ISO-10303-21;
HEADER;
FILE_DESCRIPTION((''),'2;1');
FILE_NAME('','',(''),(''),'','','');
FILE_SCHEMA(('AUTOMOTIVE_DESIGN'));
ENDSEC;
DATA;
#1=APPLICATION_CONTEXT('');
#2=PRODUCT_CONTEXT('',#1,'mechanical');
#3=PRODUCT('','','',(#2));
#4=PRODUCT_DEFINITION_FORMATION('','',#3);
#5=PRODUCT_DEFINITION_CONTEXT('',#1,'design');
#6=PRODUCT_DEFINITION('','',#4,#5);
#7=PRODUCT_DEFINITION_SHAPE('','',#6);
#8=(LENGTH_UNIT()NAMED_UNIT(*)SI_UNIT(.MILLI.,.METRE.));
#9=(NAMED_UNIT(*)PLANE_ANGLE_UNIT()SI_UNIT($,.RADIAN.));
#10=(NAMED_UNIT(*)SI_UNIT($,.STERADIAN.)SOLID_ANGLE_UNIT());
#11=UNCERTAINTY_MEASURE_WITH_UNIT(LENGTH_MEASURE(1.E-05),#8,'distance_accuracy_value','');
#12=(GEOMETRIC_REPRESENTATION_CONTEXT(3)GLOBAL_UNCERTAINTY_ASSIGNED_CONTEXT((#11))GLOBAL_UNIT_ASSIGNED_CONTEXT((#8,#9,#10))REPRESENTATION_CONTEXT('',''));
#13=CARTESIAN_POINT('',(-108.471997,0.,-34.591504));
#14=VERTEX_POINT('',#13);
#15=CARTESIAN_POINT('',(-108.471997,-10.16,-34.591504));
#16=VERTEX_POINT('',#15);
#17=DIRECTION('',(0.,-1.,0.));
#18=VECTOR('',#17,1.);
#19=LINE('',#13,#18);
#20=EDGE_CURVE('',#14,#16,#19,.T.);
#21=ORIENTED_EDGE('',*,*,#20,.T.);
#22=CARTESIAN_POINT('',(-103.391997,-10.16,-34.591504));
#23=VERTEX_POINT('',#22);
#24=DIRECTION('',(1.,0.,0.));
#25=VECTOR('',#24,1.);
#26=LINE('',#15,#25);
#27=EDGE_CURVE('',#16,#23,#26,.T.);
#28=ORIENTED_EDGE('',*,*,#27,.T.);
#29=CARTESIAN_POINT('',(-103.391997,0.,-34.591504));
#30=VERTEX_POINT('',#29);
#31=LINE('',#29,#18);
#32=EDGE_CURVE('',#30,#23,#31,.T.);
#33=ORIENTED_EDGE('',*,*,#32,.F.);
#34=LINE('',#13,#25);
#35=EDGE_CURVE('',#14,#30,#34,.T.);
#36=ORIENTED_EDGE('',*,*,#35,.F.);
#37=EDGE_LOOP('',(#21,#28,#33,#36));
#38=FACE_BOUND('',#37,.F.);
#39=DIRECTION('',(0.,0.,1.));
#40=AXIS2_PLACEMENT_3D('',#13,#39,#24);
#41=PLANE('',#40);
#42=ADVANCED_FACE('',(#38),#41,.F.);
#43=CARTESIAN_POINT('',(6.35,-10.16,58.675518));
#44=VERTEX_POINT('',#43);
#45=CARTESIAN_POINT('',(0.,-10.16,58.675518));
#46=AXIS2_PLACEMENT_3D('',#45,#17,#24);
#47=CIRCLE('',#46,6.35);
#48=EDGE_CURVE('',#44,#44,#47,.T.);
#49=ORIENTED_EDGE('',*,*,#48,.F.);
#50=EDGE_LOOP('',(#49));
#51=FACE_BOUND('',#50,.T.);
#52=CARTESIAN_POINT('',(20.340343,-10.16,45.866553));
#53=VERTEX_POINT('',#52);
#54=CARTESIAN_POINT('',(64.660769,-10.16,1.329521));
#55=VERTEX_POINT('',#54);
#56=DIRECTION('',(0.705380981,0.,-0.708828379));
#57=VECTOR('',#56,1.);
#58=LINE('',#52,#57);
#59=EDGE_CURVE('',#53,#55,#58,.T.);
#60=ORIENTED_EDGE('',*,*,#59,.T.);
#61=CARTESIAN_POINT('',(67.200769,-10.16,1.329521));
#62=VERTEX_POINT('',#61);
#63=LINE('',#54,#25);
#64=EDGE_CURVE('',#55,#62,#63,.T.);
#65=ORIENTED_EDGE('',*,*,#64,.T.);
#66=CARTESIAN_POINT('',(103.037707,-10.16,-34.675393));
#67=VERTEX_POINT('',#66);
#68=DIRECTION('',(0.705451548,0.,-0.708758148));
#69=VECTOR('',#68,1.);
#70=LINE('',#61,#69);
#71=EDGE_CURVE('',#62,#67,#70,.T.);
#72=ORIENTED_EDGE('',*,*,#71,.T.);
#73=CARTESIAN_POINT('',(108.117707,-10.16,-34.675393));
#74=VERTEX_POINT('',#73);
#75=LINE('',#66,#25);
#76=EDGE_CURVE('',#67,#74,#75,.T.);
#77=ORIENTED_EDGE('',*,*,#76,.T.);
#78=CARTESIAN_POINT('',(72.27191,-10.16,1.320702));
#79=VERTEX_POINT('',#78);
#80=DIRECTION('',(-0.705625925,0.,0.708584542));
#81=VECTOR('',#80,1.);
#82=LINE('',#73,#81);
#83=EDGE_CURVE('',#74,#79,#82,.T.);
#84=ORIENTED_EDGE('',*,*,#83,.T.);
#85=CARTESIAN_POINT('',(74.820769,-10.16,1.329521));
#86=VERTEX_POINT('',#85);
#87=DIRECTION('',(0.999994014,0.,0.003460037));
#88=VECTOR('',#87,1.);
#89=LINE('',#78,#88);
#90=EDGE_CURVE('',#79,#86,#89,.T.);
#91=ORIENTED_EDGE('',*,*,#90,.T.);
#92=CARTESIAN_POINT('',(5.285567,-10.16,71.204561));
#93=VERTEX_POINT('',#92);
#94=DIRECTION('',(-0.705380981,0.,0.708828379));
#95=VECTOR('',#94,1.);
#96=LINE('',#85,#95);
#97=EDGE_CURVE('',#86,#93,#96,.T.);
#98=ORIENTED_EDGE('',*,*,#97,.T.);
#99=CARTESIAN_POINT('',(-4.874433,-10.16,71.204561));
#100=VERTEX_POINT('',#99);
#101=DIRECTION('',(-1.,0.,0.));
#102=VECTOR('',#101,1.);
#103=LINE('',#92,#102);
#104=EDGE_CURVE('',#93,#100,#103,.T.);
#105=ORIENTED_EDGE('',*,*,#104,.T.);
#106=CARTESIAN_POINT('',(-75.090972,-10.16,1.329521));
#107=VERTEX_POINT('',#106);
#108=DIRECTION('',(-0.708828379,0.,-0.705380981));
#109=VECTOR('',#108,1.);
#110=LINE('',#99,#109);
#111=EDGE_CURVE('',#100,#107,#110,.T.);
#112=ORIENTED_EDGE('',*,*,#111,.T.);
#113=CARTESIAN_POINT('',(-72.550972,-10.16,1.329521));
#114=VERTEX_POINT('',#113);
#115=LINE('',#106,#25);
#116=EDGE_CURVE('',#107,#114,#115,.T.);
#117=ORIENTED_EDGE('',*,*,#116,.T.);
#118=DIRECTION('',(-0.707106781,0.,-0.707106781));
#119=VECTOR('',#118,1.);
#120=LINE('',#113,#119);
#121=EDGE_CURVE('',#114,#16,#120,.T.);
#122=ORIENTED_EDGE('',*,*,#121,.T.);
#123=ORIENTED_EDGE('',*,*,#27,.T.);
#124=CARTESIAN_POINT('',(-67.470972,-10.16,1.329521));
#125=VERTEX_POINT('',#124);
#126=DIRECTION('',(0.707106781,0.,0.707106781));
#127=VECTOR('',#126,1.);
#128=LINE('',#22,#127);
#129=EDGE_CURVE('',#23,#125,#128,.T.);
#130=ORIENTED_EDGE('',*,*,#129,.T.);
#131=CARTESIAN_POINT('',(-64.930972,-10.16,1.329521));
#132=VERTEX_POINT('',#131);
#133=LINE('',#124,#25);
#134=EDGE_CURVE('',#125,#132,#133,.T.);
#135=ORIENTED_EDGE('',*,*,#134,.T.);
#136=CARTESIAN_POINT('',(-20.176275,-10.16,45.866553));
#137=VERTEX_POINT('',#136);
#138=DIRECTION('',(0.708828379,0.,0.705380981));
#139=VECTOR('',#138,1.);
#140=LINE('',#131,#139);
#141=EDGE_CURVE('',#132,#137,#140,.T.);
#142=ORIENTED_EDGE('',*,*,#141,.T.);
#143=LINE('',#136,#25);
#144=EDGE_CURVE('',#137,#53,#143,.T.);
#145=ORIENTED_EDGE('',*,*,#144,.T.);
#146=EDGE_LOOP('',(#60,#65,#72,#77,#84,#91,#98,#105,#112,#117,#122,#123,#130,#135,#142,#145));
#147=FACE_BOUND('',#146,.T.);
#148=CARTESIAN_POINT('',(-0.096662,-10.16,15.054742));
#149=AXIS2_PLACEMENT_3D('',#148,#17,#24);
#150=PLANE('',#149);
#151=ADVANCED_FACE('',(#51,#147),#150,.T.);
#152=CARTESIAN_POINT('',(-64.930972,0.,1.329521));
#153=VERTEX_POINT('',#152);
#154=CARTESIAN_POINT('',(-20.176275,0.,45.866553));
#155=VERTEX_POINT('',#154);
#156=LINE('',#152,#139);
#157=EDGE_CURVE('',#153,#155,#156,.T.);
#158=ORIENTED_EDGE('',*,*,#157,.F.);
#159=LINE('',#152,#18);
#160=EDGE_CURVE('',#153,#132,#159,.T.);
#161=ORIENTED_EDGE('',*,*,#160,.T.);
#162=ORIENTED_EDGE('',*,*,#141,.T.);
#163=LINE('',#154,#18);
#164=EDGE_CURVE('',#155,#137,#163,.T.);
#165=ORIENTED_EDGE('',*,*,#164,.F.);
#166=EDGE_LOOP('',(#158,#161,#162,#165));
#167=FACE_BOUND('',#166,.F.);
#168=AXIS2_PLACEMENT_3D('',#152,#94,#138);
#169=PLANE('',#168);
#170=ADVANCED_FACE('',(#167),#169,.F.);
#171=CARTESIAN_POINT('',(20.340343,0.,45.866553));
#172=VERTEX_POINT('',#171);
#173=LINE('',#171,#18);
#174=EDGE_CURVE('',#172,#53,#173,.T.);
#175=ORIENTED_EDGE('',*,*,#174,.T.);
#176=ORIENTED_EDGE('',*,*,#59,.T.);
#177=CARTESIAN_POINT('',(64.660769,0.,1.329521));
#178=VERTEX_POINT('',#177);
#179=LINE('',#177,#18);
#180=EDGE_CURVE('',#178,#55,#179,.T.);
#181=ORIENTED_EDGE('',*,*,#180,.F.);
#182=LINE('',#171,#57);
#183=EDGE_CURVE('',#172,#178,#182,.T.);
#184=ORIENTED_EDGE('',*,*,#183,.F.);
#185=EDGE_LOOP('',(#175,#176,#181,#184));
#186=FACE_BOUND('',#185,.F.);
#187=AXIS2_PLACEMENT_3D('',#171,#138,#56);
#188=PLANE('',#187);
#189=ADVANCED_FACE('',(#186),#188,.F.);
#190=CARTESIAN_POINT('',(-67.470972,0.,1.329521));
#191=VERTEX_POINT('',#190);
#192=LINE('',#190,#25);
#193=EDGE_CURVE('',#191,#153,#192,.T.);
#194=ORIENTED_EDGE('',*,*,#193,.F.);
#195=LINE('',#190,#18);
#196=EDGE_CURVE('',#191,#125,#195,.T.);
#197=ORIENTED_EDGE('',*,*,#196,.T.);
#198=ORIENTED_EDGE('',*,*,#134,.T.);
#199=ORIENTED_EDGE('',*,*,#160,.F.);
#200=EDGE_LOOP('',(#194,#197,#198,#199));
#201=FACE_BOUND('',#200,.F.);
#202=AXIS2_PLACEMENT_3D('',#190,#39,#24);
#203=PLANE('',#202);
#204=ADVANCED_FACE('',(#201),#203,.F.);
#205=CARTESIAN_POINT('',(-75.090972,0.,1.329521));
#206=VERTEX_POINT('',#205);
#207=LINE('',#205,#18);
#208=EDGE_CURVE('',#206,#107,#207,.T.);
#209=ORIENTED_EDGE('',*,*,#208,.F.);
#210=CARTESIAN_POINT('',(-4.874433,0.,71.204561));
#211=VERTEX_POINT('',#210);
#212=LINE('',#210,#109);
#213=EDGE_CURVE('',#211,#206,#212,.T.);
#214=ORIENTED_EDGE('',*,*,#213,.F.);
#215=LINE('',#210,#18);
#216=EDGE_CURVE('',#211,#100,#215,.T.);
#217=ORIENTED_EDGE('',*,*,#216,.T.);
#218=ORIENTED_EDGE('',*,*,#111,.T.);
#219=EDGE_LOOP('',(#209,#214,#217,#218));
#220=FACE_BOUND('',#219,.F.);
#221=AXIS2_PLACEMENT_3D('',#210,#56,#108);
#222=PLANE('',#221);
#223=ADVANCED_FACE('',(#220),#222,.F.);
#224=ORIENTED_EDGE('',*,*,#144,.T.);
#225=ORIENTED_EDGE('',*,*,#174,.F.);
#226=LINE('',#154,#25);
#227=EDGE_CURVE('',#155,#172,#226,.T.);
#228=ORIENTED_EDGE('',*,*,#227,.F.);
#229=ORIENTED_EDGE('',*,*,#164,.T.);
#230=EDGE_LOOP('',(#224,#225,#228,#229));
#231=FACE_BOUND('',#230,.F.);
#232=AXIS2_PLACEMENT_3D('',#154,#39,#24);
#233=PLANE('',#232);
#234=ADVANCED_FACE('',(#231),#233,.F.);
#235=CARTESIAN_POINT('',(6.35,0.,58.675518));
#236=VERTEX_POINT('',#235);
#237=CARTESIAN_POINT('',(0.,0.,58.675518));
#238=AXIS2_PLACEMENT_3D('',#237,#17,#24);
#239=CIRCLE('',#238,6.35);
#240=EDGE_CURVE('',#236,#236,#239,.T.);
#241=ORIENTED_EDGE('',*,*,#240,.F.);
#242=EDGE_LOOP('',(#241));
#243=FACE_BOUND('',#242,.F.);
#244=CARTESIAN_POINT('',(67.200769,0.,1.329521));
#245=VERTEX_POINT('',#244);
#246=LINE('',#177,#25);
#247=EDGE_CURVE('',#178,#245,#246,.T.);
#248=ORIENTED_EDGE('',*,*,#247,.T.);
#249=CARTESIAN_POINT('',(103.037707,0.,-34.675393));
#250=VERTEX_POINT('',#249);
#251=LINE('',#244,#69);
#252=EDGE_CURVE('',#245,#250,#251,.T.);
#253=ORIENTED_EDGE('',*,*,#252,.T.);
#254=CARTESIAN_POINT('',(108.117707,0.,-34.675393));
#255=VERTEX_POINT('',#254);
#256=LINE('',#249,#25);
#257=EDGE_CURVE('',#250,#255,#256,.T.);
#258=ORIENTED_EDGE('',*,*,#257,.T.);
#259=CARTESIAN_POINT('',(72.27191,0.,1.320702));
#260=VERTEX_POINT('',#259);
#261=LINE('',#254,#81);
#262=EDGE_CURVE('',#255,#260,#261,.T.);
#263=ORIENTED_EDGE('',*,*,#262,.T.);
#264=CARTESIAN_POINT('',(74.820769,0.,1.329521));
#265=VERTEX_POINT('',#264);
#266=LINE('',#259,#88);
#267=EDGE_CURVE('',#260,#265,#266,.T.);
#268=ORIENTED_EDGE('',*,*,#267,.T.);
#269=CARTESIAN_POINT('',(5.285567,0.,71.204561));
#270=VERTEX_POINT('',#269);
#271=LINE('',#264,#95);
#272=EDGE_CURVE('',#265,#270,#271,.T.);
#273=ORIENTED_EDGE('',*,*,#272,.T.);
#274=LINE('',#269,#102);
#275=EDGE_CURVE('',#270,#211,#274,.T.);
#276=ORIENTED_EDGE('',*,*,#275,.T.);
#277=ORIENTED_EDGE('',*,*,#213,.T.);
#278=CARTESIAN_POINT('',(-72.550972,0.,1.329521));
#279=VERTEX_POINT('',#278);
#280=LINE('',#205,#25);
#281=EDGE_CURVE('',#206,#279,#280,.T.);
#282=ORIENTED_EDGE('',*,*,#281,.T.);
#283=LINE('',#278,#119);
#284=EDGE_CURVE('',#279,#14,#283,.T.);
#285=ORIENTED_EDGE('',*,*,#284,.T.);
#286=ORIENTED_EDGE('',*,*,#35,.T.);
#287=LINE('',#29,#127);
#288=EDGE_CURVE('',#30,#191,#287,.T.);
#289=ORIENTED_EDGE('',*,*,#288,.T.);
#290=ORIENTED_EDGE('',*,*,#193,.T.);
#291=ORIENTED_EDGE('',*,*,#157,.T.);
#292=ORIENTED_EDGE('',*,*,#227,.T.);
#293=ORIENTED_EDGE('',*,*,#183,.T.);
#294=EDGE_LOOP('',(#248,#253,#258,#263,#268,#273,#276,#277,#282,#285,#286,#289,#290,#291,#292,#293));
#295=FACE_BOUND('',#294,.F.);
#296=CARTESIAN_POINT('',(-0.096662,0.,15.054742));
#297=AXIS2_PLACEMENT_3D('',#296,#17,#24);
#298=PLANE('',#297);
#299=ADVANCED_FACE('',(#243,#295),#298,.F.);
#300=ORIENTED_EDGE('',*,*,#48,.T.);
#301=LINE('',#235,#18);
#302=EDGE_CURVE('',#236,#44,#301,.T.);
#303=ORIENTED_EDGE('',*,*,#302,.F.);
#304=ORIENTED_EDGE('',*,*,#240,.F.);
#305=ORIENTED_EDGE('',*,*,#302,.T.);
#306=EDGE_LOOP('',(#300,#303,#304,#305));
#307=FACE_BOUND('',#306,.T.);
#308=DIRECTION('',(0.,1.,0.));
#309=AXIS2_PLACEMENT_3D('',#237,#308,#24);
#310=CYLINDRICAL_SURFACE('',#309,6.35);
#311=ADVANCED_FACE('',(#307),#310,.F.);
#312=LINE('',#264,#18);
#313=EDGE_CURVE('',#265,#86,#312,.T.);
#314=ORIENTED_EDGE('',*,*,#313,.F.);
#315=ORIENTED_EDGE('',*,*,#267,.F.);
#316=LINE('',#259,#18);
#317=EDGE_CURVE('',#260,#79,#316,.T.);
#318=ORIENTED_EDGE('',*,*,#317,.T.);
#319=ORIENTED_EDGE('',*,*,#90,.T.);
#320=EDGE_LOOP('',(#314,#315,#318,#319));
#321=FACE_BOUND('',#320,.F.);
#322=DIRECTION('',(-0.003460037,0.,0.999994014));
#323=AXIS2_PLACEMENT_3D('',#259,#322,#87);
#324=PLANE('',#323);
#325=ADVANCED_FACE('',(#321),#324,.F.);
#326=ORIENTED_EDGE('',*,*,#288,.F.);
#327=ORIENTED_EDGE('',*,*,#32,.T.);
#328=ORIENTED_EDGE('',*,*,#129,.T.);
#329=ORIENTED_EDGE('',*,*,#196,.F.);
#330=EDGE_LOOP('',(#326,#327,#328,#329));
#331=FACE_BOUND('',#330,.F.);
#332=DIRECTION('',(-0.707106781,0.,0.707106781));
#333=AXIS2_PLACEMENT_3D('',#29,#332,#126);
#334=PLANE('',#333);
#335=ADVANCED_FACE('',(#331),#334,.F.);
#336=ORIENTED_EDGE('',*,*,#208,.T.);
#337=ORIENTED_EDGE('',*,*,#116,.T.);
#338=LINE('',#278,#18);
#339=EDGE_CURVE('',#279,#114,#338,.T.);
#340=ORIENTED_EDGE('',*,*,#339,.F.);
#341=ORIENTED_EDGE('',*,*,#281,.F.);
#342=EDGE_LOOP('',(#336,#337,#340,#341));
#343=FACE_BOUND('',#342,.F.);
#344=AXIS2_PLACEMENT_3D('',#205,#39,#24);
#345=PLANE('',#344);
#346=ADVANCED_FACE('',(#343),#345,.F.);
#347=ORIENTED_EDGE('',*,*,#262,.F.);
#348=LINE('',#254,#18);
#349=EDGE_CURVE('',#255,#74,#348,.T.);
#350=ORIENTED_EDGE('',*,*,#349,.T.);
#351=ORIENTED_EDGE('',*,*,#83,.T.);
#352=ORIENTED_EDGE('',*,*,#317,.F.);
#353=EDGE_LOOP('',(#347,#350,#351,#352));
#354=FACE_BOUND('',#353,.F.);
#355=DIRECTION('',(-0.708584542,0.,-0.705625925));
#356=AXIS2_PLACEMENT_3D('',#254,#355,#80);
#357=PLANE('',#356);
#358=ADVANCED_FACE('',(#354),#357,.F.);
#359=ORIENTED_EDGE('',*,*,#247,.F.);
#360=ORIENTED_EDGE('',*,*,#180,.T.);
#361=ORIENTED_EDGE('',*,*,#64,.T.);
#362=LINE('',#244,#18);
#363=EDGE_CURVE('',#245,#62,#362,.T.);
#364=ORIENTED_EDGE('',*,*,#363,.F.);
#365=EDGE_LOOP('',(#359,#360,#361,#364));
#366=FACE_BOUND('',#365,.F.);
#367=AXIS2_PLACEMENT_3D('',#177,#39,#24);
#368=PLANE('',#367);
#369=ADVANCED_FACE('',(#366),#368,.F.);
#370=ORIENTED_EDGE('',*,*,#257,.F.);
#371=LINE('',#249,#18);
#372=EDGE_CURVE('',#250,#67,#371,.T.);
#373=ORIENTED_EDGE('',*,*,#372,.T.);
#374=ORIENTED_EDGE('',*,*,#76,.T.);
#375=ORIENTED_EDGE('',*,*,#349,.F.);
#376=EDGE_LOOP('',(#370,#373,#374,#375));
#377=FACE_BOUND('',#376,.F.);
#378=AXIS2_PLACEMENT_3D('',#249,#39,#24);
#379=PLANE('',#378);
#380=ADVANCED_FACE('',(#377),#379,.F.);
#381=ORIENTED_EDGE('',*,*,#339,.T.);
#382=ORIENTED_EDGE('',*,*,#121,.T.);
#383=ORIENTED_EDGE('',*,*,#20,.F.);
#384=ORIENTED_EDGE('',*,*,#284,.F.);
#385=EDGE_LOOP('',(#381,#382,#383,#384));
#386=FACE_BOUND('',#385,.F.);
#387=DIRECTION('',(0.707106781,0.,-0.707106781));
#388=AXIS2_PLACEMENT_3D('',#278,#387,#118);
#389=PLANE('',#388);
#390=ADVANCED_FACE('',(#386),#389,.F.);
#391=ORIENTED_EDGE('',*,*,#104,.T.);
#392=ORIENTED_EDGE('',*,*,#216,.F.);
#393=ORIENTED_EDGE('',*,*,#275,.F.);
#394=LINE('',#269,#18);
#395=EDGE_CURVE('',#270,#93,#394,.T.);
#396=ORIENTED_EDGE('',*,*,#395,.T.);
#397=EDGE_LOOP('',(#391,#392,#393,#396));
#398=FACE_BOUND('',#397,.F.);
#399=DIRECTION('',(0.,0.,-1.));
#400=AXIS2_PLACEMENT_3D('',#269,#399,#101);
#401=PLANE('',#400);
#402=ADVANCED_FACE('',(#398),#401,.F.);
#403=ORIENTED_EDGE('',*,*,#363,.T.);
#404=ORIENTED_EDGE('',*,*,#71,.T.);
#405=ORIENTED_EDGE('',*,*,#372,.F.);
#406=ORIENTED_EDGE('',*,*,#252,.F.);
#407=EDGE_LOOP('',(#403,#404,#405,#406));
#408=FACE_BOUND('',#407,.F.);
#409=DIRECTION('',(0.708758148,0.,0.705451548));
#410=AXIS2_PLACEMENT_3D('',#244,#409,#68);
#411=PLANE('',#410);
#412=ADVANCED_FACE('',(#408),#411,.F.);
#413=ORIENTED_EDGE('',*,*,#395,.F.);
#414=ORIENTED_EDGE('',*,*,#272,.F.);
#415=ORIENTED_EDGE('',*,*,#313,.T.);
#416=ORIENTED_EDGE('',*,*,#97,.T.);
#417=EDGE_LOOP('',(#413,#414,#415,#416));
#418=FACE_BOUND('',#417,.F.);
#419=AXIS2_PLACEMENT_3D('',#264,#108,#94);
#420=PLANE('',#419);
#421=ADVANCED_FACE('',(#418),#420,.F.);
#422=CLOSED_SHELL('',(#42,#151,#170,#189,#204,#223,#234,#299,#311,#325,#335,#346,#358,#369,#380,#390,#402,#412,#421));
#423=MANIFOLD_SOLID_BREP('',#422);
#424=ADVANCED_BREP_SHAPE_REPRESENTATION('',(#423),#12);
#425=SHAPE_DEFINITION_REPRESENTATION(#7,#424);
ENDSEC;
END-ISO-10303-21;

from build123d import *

# Parameters (mm, degrees)
F0_R     = 6.35
F1_DEPTH = 10.16


# Not quite as in the source:
# - a feature names something its author has since deleted; it is built from what else it names


with BuildPart() as f1:
    # F0 (on Front) → F1 (new body)
    with BuildSketch(Plane.XZ):
        Polygon((-4.8744329511, 71.2045607365), (-75.0909721843, 1.3295207142), (-72.5509721843, 1.3295207142), (-108.4719966685, -34.5915037701), (-103.3919966685, -34.5915037701), (-67.4709721843, 1.3295207142), (-64.9309721843, 1.3295207142), (-20.1762745117, 45.8665532311), (-4.9362745117, 45.8665532311), (5.2855670489, 45.8665532311), (20.3403427678, 45.8665532311), (64.660768747, 1.3295207142), (67.200768747, 1.3295207142), (103.0377074058, -34.6753932222), (108.1177074058, -34.6753932222), (72.2719103919, 1.3207015165), (74.820768747, 1.3295207142), (5.2855670489, 71.2045607365), align=None)
        with Locations((0, 58.6755184585)):
            Circle(F0_R, mode=Mode.SUBTRACT)
    extrude(amount=F1_DEPTH)


solid = f1.part
